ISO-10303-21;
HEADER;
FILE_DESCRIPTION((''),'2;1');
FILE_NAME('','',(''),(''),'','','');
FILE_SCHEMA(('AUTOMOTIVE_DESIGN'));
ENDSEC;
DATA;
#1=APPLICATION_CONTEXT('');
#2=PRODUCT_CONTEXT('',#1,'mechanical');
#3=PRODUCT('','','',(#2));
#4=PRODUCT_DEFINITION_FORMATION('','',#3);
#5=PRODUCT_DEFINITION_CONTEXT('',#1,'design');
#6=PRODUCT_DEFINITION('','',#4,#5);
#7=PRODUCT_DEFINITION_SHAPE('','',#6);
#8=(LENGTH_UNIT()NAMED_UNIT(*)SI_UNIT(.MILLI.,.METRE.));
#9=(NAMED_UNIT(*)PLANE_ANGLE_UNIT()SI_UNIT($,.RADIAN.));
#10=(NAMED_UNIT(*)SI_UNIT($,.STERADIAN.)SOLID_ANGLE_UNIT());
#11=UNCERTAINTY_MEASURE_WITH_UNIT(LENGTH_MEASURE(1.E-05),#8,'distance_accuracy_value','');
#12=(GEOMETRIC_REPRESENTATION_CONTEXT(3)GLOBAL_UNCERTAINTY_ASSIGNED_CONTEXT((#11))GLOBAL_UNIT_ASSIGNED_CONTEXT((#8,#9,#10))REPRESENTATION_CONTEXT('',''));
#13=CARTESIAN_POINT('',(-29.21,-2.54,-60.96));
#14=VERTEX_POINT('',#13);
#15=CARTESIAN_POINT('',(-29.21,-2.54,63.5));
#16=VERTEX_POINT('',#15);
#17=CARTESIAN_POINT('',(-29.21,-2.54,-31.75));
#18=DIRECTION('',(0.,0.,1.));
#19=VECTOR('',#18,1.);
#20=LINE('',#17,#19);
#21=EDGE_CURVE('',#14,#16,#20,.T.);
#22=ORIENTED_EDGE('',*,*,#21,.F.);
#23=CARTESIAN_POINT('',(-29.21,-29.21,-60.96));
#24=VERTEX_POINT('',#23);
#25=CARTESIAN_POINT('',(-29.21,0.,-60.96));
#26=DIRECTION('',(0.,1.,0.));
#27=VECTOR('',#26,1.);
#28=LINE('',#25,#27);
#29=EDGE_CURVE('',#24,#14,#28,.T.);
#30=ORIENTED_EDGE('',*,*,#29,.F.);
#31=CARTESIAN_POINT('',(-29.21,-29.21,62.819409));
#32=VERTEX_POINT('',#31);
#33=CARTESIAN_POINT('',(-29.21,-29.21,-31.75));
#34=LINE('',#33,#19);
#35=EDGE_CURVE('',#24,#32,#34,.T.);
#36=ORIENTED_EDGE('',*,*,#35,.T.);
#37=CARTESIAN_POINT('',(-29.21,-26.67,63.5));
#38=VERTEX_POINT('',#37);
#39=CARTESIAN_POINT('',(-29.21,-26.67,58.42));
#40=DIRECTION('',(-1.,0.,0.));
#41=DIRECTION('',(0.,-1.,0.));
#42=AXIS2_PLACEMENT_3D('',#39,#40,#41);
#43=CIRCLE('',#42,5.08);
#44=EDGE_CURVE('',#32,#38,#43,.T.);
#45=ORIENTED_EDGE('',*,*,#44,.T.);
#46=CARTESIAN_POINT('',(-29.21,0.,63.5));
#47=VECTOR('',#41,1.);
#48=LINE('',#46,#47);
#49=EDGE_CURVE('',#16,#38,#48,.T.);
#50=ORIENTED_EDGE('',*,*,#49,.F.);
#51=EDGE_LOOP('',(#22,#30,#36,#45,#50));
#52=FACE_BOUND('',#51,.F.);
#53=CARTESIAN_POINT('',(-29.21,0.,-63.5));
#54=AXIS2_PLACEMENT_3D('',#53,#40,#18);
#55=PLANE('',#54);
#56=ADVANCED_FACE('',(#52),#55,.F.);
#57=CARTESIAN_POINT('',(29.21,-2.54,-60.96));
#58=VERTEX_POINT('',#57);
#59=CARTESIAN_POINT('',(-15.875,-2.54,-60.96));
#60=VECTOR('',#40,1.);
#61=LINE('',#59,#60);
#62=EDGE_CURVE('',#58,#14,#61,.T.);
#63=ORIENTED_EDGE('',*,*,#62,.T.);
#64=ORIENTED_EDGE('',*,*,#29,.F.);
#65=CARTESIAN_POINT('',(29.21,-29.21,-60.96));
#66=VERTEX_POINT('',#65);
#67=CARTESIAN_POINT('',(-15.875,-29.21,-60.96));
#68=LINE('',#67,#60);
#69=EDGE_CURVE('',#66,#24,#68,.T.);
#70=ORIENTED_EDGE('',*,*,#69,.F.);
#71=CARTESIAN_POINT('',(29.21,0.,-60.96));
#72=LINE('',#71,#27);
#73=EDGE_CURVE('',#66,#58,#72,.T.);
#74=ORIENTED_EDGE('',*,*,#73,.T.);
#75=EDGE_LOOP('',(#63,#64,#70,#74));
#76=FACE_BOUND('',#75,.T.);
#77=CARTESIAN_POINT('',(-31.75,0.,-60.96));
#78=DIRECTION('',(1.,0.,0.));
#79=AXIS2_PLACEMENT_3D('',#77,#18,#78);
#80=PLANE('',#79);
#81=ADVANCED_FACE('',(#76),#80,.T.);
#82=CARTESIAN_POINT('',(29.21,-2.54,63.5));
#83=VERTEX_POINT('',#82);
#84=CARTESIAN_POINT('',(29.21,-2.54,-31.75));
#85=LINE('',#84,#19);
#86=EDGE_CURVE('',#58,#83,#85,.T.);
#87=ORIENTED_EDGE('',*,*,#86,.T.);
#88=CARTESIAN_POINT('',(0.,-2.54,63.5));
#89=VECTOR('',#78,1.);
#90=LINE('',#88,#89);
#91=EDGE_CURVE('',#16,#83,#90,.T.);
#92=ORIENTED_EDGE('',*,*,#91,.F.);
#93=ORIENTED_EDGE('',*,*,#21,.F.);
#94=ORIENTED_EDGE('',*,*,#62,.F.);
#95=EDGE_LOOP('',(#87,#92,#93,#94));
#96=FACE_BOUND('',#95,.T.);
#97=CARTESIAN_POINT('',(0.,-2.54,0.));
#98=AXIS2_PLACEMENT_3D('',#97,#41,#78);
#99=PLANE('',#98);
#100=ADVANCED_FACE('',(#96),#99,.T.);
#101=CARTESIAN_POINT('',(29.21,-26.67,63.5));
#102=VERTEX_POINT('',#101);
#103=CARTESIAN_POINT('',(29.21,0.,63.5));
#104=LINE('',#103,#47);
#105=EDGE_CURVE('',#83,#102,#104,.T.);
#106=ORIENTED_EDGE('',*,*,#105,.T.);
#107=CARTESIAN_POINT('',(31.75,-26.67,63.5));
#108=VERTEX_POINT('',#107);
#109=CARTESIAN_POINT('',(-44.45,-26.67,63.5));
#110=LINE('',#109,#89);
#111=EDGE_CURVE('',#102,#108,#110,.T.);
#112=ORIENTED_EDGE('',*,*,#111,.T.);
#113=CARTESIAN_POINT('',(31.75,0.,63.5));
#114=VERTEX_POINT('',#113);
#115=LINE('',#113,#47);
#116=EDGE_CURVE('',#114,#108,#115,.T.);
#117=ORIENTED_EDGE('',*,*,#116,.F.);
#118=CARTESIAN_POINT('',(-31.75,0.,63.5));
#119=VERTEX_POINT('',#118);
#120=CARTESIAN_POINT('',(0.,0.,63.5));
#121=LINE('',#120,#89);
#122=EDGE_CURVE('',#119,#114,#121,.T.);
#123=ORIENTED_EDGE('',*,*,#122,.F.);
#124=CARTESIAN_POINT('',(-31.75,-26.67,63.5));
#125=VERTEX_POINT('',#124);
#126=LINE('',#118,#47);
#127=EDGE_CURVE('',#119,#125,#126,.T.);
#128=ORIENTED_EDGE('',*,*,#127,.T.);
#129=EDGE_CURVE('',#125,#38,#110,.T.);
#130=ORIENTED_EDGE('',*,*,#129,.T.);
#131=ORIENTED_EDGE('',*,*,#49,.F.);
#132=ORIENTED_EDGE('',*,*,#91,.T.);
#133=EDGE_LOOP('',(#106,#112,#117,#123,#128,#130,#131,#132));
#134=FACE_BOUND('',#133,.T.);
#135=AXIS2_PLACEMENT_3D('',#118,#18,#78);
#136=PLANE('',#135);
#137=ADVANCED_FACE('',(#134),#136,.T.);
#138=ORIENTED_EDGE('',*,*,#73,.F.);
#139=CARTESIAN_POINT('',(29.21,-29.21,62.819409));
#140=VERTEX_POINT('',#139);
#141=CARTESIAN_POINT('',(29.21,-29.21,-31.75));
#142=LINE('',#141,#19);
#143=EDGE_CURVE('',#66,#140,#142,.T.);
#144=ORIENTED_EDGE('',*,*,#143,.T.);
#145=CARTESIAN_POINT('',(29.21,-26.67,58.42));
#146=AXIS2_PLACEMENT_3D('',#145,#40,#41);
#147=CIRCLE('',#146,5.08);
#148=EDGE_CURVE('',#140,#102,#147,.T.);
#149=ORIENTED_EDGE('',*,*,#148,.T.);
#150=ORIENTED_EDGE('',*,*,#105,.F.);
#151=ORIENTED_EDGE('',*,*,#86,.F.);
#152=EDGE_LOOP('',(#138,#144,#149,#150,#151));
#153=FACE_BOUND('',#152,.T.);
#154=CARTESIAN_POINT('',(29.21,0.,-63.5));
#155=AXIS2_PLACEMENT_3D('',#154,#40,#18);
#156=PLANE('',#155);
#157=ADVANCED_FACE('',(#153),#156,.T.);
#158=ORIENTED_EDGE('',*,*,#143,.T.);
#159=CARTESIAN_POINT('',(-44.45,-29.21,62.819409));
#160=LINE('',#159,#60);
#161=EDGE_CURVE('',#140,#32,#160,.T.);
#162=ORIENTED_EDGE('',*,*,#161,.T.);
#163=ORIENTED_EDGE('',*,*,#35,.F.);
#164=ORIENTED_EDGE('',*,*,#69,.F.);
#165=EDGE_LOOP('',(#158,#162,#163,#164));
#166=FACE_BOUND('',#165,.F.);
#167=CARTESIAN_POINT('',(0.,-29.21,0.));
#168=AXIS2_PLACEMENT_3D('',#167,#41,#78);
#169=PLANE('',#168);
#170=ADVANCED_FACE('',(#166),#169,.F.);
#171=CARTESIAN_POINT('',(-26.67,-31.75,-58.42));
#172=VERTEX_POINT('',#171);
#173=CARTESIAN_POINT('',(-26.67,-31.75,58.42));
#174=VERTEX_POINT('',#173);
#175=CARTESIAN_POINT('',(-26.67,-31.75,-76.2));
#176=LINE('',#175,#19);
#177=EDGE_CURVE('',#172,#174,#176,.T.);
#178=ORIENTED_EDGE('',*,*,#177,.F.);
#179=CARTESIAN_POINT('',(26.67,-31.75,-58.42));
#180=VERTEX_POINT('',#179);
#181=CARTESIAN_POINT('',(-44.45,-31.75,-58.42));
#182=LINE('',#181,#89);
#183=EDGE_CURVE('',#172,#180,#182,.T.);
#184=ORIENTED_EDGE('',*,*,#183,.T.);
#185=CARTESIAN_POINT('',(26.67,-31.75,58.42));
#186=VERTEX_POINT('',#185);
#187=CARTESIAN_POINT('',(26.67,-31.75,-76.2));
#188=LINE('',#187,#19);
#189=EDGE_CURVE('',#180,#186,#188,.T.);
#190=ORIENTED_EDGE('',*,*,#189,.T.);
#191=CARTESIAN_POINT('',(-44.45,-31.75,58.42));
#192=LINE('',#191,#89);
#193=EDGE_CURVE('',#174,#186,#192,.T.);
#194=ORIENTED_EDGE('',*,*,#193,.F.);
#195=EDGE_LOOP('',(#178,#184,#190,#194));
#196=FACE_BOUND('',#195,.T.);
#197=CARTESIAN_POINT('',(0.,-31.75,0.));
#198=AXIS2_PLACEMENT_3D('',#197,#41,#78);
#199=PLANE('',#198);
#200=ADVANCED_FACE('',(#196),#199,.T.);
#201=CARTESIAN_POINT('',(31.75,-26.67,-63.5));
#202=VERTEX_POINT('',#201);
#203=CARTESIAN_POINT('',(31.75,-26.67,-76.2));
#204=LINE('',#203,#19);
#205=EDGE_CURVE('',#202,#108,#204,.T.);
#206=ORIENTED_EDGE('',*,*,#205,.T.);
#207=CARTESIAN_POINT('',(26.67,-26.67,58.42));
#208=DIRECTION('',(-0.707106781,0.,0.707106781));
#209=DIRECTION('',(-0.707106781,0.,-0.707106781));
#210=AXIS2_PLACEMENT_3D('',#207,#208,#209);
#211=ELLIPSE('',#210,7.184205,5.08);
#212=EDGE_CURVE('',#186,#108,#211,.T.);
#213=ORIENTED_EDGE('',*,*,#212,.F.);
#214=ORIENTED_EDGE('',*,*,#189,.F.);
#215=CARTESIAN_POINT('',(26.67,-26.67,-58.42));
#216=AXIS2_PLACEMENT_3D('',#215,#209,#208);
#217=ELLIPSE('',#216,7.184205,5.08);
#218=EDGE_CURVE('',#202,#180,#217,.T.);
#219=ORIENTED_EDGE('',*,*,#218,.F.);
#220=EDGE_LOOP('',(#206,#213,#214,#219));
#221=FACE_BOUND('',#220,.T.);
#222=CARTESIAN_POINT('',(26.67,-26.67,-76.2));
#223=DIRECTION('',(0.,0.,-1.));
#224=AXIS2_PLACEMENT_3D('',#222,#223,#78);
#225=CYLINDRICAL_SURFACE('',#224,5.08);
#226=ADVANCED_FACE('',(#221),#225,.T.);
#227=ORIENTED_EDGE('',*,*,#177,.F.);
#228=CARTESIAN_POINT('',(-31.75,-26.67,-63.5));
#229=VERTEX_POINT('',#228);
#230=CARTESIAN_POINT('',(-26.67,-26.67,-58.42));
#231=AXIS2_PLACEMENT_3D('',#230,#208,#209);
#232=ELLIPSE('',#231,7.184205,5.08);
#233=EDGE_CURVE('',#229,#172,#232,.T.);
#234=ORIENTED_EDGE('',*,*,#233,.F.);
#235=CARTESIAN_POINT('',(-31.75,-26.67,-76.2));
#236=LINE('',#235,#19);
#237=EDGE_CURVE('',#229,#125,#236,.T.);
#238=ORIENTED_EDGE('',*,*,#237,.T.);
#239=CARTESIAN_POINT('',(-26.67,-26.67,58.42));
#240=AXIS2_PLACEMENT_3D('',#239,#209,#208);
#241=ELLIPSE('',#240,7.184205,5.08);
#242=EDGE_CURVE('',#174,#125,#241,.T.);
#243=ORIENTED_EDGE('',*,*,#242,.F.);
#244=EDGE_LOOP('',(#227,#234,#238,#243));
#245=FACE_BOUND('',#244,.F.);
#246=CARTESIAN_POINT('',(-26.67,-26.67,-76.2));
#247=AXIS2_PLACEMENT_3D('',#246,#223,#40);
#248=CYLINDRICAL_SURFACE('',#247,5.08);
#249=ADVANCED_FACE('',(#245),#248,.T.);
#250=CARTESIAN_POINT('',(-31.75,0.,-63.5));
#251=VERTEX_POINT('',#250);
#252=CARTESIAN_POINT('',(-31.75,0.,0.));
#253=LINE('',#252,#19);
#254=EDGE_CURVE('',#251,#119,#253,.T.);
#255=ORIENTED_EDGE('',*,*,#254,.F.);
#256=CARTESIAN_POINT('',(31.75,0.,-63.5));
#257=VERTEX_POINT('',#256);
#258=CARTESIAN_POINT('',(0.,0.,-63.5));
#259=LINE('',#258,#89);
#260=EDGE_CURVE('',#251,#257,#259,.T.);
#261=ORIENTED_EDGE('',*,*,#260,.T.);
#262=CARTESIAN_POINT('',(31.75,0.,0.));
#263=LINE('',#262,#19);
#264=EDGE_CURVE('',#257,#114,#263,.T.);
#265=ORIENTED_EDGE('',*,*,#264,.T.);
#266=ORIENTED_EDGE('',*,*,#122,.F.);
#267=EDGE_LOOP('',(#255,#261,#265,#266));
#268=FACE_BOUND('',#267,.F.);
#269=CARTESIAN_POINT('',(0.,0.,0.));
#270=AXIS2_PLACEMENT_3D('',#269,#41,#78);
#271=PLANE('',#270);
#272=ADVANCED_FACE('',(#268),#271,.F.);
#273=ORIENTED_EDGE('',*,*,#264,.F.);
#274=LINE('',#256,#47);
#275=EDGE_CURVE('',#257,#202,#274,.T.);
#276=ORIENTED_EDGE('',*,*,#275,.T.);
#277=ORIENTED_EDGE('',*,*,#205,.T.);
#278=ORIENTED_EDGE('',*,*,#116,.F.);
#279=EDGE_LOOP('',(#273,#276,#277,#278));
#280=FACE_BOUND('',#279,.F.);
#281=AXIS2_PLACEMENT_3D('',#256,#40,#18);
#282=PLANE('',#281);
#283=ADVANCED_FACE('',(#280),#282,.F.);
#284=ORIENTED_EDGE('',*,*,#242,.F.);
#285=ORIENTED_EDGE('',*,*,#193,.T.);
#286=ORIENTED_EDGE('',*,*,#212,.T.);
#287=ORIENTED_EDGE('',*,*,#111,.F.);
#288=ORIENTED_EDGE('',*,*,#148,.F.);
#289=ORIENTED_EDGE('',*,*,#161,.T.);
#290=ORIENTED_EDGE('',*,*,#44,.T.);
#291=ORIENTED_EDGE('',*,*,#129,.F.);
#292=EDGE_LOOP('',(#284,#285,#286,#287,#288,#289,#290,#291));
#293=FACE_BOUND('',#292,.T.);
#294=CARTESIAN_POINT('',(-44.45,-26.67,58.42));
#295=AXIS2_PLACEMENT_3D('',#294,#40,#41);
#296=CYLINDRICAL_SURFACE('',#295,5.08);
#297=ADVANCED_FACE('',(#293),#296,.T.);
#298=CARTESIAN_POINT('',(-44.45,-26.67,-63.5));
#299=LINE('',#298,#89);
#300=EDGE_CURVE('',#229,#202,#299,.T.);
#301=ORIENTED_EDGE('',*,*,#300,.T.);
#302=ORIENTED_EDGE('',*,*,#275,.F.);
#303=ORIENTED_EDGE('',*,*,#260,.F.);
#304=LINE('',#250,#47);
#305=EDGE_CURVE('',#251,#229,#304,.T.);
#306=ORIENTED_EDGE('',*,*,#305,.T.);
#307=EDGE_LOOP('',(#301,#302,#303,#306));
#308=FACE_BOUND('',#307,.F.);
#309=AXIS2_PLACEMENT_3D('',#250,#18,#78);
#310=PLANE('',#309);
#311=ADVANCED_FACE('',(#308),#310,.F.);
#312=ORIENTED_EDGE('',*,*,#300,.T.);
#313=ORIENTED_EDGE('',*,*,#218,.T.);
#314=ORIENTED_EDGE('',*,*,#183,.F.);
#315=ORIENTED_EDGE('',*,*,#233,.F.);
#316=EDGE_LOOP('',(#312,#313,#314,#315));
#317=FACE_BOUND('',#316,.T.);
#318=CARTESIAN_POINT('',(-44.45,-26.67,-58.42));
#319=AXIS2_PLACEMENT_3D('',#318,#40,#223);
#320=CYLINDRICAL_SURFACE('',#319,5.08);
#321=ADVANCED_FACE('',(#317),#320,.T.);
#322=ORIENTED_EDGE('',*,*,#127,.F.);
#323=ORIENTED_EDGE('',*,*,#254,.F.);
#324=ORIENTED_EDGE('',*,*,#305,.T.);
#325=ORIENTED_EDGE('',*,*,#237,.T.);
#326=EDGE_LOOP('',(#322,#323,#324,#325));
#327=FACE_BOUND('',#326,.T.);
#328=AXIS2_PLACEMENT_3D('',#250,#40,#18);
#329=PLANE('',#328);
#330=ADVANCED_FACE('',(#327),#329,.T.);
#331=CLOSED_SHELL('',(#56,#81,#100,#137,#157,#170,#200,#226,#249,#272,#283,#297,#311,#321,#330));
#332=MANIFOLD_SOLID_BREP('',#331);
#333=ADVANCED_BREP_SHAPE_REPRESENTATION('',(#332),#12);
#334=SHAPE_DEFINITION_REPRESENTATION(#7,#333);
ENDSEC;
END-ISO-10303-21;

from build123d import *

# Parameters (mm, degrees)
F0_W        = 63.5
F0_H        = 127
F1_DEPTH    = 31.75
F2_T        = -2.54
F3_T1_DEPTH = 88.9
F3_T3_DEPTH = 152.4


# Not quite as in the source:
# - a fillet or chamfer that OpenCascade refuses, or shapes differently, is made with other operations: its cross-section is extruded or revolved along the edge and cut away or added


with BuildPart() as f1:
    # F0 (on Front) → F1 (new body)
    with BuildSketch(Plane.XZ):
        Rectangle(F0_W, F0_H)
    extrude(amount=F1_DEPTH)

    # F2
    f2_openings = [f1.faces().sort_by_distance(p)[0] for p in [
        (0, -15.875, 63.5),
    ]]
    offset(amount=F2_T, openings=f2_openings)

    # F3: fillet of radius 5.08 on 4 edges, made by hand

    # F3_s2 → F3_t1 (cut)
    with BuildSketch(Plane.YZ.offset(-44.45)):
        with BuildLine():
            ThreePointArc((-31.75, 58.42), (-30.2621024484, 62.0121024484), (-26.67, 63.5))
            Line((-26.67, 63.5), (-31.75, 63.5))
            Line((-31.75, 63.5), (-31.75, 58.42))
        make_face()
        with BuildLine():
            ThreePointArc((-26.67, -63.5), (-30.2621024484, -62.0121024484), (-31.75, -58.42))
            Line((-31.75, -58.42), (-31.75, -63.5))
            Line((-31.75, -63.5), (-26.67, -63.5))
        make_face()
    extrude(amount=F3_T1_DEPTH, mode=Mode.SUBTRACT)

    # F3_s4 → F3_t3 (cut)
    with BuildSketch(Plane.XY.offset(-76.2)):
        with BuildLine():
            ThreePointArc((-31.75, -26.67), (-30.2621024484, -30.2621024484), (-26.67, -31.75))
            Line((-26.67, -31.75), (-31.75, -31.75))
            Line((-31.75, -31.75), (-31.75, -26.67))
        make_face()
        with BuildLine():
            ThreePointArc((31.75, -26.67), (30.2621024484, -30.2621024484), (26.67, -31.75))
            Line((26.67, -31.75), (31.75, -31.75))
            Line((31.75, -31.75), (31.75, -26.67))
        make_face()
    extrude(amount=F3_T3_DEPTH, mode=Mode.SUBTRACT)


solid = f1.part
